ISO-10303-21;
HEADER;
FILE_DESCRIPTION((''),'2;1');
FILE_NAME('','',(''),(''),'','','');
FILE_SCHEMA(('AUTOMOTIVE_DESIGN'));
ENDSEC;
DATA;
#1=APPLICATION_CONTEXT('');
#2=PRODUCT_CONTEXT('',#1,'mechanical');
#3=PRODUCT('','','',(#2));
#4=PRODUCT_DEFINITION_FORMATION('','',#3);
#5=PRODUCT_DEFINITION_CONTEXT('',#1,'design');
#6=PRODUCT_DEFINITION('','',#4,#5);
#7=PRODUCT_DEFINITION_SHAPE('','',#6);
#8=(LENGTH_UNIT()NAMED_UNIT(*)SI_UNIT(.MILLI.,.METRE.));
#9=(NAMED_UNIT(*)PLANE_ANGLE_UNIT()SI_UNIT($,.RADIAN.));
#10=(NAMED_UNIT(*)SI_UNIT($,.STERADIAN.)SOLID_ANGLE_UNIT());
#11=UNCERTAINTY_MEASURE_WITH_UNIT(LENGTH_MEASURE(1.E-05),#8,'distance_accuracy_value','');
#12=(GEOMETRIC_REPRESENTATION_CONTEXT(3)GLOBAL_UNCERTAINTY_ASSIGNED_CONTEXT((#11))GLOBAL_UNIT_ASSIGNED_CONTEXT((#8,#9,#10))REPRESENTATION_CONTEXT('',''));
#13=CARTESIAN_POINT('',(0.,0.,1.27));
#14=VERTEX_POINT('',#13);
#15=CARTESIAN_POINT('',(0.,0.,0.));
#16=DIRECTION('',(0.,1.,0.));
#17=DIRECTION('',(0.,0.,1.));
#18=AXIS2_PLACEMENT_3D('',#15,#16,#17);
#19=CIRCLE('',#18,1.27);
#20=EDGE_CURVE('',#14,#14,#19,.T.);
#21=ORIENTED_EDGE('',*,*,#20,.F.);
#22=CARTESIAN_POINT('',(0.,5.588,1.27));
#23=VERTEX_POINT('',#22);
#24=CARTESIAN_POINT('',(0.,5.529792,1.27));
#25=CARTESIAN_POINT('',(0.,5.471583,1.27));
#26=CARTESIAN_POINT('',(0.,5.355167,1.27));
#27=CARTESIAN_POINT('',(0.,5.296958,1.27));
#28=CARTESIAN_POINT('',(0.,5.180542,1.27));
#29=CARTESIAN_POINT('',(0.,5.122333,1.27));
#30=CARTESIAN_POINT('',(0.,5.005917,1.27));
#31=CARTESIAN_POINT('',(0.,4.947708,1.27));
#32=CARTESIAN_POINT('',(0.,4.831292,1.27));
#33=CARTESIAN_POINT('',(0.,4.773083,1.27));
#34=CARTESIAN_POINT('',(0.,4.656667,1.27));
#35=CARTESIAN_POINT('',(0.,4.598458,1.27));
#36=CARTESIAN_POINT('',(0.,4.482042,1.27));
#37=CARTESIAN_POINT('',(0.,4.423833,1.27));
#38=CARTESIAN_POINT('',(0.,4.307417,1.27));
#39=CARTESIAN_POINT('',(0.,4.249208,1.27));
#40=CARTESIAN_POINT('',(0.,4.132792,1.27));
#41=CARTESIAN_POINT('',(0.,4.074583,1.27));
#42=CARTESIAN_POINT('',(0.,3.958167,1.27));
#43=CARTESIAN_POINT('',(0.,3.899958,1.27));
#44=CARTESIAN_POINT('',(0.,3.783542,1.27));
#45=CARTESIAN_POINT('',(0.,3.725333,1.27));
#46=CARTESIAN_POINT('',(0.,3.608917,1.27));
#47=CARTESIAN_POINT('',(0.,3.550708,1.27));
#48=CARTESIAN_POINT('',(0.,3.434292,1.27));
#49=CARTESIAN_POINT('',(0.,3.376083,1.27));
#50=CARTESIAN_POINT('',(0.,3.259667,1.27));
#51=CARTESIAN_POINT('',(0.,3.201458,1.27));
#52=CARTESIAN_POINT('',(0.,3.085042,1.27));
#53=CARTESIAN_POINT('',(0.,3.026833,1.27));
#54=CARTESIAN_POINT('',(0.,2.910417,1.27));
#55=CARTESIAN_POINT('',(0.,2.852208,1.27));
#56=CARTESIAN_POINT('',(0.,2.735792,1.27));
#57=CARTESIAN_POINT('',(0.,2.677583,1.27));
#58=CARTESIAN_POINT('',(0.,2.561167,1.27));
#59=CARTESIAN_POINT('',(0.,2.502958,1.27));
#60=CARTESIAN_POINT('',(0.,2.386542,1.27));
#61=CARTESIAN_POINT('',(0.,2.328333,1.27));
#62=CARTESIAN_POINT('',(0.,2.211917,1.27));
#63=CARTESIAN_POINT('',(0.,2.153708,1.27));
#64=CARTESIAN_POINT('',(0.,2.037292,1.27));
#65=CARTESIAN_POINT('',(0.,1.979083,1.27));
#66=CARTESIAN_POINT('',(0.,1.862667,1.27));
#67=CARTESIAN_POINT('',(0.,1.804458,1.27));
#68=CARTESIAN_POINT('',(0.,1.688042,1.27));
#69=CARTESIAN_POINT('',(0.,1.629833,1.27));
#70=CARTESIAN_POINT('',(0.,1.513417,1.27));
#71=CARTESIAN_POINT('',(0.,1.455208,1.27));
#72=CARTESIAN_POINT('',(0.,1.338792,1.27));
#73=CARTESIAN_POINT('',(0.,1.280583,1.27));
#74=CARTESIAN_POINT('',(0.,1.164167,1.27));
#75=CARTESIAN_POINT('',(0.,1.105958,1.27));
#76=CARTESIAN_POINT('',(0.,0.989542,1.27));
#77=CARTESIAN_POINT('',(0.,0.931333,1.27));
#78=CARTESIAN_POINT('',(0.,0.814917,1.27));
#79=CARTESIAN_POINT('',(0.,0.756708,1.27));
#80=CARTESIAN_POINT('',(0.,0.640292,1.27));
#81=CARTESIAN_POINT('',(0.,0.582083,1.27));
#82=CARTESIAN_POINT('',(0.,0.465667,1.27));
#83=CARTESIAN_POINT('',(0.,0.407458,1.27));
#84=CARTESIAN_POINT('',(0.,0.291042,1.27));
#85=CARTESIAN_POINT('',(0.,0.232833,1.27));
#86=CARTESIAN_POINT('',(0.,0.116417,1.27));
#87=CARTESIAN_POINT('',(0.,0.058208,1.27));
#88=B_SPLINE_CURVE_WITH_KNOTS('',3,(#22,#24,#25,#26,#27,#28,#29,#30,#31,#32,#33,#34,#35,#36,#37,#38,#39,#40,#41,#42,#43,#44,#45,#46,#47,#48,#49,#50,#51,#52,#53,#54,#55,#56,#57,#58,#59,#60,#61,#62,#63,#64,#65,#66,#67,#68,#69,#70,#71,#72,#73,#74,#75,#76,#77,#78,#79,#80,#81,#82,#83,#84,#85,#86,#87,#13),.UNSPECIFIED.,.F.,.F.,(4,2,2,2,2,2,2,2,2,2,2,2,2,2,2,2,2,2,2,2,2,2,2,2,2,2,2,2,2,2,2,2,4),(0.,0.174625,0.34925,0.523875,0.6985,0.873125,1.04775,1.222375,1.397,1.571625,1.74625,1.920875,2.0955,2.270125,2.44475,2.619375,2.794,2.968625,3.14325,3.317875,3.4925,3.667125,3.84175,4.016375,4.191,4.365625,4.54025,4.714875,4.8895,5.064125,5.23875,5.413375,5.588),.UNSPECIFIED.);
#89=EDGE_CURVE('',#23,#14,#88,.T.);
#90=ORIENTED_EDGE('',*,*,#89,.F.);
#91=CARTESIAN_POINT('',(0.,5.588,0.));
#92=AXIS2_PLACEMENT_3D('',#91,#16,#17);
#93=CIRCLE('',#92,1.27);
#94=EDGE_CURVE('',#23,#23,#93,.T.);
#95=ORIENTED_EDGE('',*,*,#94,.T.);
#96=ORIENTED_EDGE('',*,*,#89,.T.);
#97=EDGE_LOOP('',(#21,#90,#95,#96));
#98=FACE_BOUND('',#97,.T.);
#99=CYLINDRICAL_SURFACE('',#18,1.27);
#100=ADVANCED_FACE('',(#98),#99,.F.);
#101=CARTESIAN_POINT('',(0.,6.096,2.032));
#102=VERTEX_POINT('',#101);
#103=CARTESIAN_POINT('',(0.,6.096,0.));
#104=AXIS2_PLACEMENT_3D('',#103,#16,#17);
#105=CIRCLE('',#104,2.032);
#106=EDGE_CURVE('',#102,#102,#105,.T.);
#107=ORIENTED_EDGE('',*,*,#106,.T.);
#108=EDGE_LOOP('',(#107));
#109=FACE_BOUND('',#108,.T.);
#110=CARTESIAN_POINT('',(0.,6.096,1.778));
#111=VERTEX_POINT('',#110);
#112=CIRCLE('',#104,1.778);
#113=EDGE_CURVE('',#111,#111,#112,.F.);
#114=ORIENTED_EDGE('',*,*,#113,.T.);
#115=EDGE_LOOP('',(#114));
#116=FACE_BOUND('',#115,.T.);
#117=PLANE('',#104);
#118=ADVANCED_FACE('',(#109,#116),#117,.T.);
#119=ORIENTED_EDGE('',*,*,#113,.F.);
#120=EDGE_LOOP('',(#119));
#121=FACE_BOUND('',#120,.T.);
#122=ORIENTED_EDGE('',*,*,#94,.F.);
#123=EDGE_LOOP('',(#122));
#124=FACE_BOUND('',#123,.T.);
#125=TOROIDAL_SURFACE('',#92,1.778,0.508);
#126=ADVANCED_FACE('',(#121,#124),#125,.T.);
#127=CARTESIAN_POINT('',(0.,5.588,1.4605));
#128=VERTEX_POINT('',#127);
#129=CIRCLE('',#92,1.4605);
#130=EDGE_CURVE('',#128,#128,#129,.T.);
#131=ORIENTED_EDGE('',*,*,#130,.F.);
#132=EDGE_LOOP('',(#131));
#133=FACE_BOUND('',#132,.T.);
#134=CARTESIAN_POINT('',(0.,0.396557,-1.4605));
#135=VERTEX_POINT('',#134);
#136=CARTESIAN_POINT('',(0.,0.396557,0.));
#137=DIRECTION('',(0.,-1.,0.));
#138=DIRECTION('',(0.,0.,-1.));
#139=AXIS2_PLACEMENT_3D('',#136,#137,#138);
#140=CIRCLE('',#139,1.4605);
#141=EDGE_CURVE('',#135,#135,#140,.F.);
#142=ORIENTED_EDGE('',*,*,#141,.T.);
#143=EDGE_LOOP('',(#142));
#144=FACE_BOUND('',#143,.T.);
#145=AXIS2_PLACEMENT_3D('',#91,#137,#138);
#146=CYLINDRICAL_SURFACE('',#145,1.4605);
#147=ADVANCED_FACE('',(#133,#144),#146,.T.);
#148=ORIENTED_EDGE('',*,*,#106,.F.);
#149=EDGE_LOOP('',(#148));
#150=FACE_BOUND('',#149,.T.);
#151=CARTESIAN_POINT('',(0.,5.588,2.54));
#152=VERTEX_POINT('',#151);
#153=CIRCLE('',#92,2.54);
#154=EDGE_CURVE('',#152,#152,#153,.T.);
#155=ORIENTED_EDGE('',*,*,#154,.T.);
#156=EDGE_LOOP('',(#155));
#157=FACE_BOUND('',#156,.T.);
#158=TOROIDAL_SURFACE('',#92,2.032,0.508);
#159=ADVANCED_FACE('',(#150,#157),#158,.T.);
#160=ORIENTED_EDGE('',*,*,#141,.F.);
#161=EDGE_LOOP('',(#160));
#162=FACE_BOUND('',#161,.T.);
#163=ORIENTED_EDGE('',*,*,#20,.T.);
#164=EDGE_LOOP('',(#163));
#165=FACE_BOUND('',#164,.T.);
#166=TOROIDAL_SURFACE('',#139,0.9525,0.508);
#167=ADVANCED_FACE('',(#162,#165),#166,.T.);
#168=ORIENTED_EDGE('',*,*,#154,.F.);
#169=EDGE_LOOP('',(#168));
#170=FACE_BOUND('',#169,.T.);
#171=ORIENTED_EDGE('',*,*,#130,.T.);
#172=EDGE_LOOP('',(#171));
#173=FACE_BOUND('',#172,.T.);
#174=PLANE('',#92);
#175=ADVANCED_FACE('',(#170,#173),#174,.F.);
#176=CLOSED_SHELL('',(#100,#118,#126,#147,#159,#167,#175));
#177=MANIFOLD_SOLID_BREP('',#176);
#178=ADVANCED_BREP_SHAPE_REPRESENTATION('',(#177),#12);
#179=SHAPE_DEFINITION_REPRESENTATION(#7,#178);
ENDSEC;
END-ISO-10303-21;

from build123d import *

# Parameters (mm, degrees)
SKETCH1_R           = 1.4605
BOSS_EXTRUDE1_DEPTH = 5.588
SKETCH2_R           = 2.54
BOSS_EXTRUDE2_DEPTH = 0.508
SKETCH3_R           = 1.27
CUT_EXTRUDE1_DEPTH  = 8.075621245
FILLET1_R           = 0.508


with BuildPart() as part:
    # Sketch1 → Boss-Extrude1 (new body)
    with BuildSketch(Plane(origin=(0, 0, 0), x_dir=(1, 0, 0), z_dir=(0, 1, 0))):
        with Locations(Location((0, 0, 0), (0, 0, 270))):
            Circle(SKETCH1_R)
    extrude(amount=BOSS_EXTRUDE1_DEPTH)

    # Sketch2 → Boss-Extrude2 (add)
    with BuildSketch(Plane(origin=(0, 5.588, 0), x_dir=(1, 0, 0), z_dir=(0, 1, 0))):
        with Locations(Location((0, 0, 0), (0, 0, 270))):
            Circle(SKETCH2_R)
    extrude(amount=BOSS_EXTRUDE2_DEPTH)

    # Sketch3 → Cut-Extrude1 (cut, through all)
    with BuildSketch(Plane(origin=(0, 6.096, 0), x_dir=(1, 0, 0), z_dir=(0, 1, 0))):
        with Locations(Location((0, 0, 0), (0, 0, 270))):
            Circle(SKETCH3_R)
    extrude(amount=-CUT_EXTRUDE1_DEPTH, mode=Mode.SUBTRACT)

    # Fillet1
    # the kernel refuses this fillet: 0.508 mm, written as the material it takes off along each edge
    with BuildSketch(Plane(origin=(0, 6.096, 0), x_dir=(0, 0, 1), z_dir=(-1, 0, 0))) as fillet1_piece_1:
        with BuildLine():
            CenterArc((1.27 + FILLET1_R, -FILLET1_R), FILLET1_R, 90, 90)
            Line((1.27, -FILLET1_R), (1.27 - FILLET1_R * 0.02, -FILLET1_R))
            Line((1.27 - FILLET1_R * 0.02, -FILLET1_R), (1.27 - FILLET1_R * 0.02, FILLET1_R * 0.02))
            Line((1.27 - FILLET1_R * 0.02, FILLET1_R * 0.02), (1.27 + FILLET1_R, FILLET1_R * 0.02))
            Line((1.27 + FILLET1_R, FILLET1_R * 0.02), (1.27 + FILLET1_R, 0))
        make_face()
    revolve(axis=Axis((0, 6.096, 0), (0, 1, 0)), mode=Mode.SUBTRACT)
    with BuildSketch(Plane(origin=(0, 0, 0), x_dir=(0, 0, 1), z_dir=(-1, 0, 0))) as fillet1_piece_2:
        with BuildLine():
            CenterArc((0.9525, 0.396557373), FILLET1_R, 308.682187453, 51.317812547)
            Line((1.27, 0), (1.27635, -0.007931147))
            ThreePointArc((1.27635, -0.007931147), (1.36525, -0.01016), (1.4605, -0.01016))
            Line((1.4605, -0.01016), (1.47066, 0))
            Line((1.47066, 0), (1.47066, 0.396557373))
            Line((1.47066, 0.396557373), (1.4605, 0.396557373))
        make_face()
    revolve(axis=Axis((0, 0, 0), (0, 1, 0)), mode=Mode.SUBTRACT)
    with BuildSketch(Plane(origin=(0, 6.096, 0), x_dir=(0, 0, 1), z_dir=(-1, 0, 0))) as fillet1_piece_3:
        with BuildLine():
            CenterArc((2.54 - FILLET1_R, -FILLET1_R), FILLET1_R, 0, 90)
            Line((2.54 - FILLET1_R, 0), (2.54 - FILLET1_R, FILLET1_R * 0.02))
            Line((2.54 - FILLET1_R, FILLET1_R * 0.02), (2.54 + FILLET1_R * 0.02, FILLET1_R * 0.02))
            Line((2.54 + FILLET1_R * 0.02, FILLET1_R * 0.02), (2.54 + FILLET1_R * 0.02, -FILLET1_R))
            Line((2.54 + FILLET1_R * 0.02, -FILLET1_R), (2.54, -FILLET1_R))
        make_face()
    revolve(axis=Axis((0, 6.096, 0), (0, 1, 0)), mode=Mode.SUBTRACT)


solid = part.part
